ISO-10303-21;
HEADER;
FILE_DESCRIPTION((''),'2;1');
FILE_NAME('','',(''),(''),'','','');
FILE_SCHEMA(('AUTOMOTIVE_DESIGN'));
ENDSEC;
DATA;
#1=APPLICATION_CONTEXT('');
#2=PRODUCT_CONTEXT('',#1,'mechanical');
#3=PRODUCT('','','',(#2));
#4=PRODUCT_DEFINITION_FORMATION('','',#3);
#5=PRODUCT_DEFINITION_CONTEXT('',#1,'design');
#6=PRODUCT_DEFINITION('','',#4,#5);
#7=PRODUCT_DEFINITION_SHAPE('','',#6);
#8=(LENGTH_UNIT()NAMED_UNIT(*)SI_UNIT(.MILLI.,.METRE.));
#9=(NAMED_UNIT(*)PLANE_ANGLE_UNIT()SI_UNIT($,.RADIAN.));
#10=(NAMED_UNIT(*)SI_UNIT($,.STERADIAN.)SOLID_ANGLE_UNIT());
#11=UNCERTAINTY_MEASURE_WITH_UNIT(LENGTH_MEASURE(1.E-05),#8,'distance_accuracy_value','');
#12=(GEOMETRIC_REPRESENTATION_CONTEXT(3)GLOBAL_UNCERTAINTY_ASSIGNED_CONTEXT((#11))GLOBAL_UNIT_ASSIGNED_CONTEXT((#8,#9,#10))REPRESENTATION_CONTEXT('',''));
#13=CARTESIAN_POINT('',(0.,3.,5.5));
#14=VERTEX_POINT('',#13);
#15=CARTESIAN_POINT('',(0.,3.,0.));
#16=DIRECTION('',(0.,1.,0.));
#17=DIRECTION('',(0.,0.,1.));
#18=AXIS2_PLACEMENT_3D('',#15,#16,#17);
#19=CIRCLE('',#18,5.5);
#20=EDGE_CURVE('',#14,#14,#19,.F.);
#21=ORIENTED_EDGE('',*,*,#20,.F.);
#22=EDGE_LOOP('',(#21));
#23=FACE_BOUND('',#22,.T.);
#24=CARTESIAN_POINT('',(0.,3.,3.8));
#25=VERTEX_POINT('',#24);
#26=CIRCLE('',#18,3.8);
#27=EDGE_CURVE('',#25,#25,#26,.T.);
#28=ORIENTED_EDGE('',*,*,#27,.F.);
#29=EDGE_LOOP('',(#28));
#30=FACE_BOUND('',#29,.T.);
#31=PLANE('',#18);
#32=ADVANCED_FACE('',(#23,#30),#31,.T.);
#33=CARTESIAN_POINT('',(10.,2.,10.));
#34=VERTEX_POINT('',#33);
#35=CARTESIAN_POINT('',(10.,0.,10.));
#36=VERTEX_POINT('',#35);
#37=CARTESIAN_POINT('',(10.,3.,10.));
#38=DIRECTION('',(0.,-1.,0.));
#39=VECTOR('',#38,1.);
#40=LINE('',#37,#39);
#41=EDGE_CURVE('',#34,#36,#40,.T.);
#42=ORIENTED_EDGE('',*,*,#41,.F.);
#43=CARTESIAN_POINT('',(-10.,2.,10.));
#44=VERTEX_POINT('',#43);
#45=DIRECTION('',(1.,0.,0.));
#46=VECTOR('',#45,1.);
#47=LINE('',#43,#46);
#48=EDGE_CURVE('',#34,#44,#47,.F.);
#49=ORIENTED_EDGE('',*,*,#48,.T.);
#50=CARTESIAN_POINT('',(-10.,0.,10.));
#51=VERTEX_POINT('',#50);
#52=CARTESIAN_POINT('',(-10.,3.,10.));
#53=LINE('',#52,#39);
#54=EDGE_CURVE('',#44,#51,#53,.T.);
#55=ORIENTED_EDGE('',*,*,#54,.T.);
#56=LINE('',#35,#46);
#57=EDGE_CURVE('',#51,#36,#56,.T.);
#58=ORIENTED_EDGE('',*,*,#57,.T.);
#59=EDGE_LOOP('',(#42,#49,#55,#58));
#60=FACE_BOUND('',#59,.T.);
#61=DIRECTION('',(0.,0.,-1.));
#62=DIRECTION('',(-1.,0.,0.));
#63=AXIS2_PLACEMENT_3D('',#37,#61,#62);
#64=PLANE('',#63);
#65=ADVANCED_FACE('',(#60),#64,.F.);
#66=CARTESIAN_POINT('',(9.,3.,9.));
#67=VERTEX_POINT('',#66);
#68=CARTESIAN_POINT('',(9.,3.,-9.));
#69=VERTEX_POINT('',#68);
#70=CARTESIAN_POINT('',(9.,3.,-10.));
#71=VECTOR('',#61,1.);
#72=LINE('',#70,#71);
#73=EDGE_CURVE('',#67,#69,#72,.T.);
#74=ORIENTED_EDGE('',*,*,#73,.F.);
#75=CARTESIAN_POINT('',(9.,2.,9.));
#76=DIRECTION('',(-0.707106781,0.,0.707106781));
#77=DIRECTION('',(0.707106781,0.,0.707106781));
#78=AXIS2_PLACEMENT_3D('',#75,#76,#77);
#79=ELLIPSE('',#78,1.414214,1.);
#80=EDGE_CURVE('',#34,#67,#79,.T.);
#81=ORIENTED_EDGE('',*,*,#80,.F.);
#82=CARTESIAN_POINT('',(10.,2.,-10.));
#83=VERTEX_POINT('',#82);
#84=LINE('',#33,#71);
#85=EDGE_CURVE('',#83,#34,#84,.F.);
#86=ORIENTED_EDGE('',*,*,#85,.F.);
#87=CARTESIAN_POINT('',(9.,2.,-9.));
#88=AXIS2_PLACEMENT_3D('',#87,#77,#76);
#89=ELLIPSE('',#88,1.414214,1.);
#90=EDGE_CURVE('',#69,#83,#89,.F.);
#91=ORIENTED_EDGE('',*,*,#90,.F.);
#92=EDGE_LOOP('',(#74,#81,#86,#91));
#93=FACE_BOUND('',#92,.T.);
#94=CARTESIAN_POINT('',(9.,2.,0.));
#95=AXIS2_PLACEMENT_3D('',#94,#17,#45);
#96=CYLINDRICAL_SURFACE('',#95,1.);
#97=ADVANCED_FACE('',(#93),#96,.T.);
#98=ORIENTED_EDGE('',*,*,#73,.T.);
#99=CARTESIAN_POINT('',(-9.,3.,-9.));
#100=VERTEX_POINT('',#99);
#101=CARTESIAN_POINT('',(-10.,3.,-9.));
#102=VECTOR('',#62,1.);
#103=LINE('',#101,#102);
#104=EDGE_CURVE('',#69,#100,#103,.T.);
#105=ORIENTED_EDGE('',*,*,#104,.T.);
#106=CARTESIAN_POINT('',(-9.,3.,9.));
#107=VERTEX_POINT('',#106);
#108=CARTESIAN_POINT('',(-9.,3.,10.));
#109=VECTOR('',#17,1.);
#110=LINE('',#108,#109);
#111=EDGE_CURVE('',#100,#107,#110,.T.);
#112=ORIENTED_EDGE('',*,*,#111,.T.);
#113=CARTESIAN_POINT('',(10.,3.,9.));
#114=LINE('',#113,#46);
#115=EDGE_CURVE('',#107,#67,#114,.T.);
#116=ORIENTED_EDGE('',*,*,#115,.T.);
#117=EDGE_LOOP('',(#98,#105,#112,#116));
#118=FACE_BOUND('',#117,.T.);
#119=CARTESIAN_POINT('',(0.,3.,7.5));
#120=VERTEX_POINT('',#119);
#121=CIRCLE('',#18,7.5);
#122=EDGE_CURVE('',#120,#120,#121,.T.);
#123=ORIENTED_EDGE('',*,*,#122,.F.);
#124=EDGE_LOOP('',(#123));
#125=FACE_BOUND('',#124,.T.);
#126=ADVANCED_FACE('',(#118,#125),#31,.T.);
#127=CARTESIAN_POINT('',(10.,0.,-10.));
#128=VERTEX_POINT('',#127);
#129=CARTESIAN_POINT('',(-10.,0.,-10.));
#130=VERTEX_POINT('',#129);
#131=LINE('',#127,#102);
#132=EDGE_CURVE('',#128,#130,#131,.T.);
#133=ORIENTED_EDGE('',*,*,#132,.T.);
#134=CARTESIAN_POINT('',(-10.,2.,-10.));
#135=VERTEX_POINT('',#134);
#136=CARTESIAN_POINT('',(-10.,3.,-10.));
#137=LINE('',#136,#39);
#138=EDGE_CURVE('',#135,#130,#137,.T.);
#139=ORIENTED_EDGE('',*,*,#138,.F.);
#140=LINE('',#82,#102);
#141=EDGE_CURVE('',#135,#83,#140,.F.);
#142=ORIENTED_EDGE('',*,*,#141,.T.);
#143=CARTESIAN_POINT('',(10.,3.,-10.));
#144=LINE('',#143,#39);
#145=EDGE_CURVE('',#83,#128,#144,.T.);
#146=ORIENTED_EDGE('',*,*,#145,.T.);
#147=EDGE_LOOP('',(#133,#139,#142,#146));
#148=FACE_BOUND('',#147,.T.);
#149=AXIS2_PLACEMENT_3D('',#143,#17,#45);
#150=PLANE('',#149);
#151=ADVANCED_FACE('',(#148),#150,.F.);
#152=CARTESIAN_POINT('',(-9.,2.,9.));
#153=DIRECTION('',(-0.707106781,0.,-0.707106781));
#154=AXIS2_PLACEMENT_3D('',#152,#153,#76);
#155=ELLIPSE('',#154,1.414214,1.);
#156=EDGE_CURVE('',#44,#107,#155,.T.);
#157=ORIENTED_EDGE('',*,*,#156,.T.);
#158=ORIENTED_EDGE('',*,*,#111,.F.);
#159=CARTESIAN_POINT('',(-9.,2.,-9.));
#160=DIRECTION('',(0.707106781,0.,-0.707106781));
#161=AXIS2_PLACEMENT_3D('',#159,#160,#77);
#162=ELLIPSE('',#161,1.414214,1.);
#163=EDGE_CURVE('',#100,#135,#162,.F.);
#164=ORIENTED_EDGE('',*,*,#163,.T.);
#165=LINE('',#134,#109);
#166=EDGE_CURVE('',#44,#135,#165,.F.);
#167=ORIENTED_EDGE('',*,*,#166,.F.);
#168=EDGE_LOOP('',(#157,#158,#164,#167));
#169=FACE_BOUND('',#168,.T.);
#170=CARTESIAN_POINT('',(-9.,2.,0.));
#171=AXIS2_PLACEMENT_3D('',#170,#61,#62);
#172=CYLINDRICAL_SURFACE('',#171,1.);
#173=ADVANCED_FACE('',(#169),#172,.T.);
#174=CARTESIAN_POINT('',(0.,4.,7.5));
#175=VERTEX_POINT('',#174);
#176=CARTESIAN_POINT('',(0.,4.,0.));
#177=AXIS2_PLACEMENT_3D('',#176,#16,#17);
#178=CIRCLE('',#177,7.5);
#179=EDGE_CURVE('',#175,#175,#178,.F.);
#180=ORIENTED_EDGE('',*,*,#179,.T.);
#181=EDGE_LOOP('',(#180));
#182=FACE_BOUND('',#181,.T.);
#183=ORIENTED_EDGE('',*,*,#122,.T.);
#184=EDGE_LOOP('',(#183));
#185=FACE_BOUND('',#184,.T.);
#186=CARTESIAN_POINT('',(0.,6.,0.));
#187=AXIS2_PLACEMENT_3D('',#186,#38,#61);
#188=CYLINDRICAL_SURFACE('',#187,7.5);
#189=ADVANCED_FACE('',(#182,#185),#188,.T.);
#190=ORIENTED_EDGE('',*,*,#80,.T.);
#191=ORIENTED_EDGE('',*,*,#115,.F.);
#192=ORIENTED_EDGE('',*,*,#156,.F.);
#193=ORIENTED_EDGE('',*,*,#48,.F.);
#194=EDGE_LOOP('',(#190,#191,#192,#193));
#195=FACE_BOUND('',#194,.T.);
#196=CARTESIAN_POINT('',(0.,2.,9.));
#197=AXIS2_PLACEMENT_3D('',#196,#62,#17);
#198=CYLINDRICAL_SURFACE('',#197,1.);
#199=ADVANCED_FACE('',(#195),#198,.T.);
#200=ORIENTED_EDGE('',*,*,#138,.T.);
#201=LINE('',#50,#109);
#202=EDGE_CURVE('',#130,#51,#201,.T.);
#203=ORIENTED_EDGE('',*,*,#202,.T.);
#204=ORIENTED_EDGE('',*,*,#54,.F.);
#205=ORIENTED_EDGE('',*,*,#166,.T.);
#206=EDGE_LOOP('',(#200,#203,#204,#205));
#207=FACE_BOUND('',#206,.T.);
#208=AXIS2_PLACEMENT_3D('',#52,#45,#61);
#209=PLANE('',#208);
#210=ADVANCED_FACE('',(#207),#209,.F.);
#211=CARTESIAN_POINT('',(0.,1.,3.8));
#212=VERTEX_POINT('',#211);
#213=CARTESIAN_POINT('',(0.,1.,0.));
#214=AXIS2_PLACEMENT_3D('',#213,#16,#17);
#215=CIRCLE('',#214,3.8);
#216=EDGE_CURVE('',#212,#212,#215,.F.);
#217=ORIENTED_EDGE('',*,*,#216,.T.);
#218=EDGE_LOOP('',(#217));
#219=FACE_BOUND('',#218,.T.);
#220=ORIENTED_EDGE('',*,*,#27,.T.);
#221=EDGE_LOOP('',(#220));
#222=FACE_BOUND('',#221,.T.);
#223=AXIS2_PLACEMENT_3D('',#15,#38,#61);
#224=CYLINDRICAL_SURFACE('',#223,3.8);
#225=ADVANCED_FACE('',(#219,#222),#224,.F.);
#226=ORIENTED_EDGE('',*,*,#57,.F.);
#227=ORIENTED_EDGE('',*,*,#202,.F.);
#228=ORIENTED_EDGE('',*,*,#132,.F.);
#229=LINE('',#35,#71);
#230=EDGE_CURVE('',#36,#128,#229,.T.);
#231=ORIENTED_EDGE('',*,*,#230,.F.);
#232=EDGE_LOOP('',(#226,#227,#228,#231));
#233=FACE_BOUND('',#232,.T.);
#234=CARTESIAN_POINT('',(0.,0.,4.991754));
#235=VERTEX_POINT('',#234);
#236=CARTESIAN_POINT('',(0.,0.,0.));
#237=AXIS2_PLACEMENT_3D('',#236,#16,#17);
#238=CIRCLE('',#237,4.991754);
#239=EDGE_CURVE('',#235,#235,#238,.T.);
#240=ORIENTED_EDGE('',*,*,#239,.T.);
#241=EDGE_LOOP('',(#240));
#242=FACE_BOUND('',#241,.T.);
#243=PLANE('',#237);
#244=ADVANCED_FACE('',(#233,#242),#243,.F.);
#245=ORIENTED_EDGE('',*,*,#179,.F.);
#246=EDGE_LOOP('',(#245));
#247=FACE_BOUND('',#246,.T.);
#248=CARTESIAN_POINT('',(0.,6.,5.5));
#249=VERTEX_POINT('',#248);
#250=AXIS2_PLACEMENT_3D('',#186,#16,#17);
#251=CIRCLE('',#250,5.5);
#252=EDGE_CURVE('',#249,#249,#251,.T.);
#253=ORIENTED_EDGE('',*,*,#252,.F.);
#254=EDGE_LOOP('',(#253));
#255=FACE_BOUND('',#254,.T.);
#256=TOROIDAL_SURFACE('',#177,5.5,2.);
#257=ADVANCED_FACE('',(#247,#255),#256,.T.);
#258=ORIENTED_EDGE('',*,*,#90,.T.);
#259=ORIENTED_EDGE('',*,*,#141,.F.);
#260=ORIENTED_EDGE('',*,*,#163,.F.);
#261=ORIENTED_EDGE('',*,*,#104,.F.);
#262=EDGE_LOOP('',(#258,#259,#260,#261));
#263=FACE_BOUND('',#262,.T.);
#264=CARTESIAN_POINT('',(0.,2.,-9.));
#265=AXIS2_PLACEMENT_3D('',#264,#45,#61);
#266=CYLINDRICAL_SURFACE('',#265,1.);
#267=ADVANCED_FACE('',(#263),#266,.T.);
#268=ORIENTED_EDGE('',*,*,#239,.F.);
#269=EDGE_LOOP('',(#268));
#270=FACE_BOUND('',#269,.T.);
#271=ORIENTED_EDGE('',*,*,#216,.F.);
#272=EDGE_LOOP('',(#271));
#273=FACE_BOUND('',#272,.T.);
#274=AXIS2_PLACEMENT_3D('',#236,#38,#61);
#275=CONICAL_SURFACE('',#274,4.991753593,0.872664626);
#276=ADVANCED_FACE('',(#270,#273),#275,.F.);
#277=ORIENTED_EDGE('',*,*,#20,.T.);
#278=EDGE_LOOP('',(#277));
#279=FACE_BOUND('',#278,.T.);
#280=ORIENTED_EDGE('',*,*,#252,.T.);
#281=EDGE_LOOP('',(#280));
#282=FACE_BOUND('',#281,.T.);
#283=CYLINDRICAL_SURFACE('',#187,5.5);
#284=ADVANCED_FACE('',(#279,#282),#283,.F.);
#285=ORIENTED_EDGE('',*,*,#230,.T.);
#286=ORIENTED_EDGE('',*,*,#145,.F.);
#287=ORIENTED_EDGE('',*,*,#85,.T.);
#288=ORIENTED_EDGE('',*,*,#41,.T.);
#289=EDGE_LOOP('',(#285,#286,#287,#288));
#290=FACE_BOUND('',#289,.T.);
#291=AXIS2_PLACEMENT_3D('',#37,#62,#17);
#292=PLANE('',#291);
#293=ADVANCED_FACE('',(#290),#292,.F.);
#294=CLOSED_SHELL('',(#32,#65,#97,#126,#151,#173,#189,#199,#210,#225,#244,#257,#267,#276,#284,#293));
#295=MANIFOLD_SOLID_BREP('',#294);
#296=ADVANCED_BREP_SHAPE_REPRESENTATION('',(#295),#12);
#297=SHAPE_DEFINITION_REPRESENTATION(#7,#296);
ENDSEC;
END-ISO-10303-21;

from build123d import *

# Parameters (mm, degrees)
SKETCH1_W           = 20
SKETCH1_H           = 20
SKETCH1_R           = 3.8
BOSS_EXTRUDE1_DEPTH = 3
FILLET1_R           = 1
CHAMFER1_SIZE       = 1
CHAMFER1_SIZE2      = 1.191753593
SKETCH2_R           = 7.5
SKETCH2_R_2         = 5.5
BOSS_EXTRUDE2_DEPTH = 3
FILLET2_R           = 2


with BuildPart() as part:
    # Sketch1 → Boss-Extrude1 (new body)
    with BuildSketch(Plane(origin=(0, 0, 0), x_dir=(1, 0, 0), z_dir=(0, 1, 0))):
        Rectangle(SKETCH1_W, SKETCH1_H)
        with Locations(Location((0, 0, 0), (0, 0, 270))):
            Circle(SKETCH1_R, mode=Mode.SUBTRACT)
    extrude(amount=BOSS_EXTRUDE1_DEPTH)

    # Fillet1
    fillet1_edges = [part.edges().sort_by_distance(p)[0] for p in [
        (10, 3, 0),
        (0, 3, -10),
        (-10, 3, 0),
        (0, 3, 10),
    ]]
    fillet(fillet1_edges, radius=FILLET1_R)

    # Chamfer1
    chamfer1_edges = [part.edges().sort_by_distance(p)[0] for p in [
        (0, 0, -3.8),
    ]]
    chamfer1_side = [part.faces().sort_by_distance(p)[0] for p in [
        (0, 1.5, -3.8),
    ]]
    chamfer(chamfer1_edges, length=CHAMFER1_SIZE, length2=CHAMFER1_SIZE2, reference=chamfer1_side[0])

    # Sketch2 → Boss-Extrude2 (add)
    with BuildSketch(Plane(origin=(0, 3, 0), x_dir=(1, 0, 0), z_dir=(0, 1, 0))):
        with Locations(Location((0, 0, 0), (0, 0, 270))):
            Circle(SKETCH2_R)
        with Locations(Location((0, 0, 0), (0, 0, 270))):
            Circle(SKETCH2_R_2, mode=Mode.SUBTRACT)
    extrude(amount=BOSS_EXTRUDE2_DEPTH)

    # Fillet2
    fillet2_edges = [part.edges().sort_by_distance(p)[0] for p in [
        (0, 6, -7.5),
    ]]
    fillet(fillet2_edges, radius=FILLET2_R - 0.0001)  # a hair under: the kernel refuses the full size


solid = part.part
